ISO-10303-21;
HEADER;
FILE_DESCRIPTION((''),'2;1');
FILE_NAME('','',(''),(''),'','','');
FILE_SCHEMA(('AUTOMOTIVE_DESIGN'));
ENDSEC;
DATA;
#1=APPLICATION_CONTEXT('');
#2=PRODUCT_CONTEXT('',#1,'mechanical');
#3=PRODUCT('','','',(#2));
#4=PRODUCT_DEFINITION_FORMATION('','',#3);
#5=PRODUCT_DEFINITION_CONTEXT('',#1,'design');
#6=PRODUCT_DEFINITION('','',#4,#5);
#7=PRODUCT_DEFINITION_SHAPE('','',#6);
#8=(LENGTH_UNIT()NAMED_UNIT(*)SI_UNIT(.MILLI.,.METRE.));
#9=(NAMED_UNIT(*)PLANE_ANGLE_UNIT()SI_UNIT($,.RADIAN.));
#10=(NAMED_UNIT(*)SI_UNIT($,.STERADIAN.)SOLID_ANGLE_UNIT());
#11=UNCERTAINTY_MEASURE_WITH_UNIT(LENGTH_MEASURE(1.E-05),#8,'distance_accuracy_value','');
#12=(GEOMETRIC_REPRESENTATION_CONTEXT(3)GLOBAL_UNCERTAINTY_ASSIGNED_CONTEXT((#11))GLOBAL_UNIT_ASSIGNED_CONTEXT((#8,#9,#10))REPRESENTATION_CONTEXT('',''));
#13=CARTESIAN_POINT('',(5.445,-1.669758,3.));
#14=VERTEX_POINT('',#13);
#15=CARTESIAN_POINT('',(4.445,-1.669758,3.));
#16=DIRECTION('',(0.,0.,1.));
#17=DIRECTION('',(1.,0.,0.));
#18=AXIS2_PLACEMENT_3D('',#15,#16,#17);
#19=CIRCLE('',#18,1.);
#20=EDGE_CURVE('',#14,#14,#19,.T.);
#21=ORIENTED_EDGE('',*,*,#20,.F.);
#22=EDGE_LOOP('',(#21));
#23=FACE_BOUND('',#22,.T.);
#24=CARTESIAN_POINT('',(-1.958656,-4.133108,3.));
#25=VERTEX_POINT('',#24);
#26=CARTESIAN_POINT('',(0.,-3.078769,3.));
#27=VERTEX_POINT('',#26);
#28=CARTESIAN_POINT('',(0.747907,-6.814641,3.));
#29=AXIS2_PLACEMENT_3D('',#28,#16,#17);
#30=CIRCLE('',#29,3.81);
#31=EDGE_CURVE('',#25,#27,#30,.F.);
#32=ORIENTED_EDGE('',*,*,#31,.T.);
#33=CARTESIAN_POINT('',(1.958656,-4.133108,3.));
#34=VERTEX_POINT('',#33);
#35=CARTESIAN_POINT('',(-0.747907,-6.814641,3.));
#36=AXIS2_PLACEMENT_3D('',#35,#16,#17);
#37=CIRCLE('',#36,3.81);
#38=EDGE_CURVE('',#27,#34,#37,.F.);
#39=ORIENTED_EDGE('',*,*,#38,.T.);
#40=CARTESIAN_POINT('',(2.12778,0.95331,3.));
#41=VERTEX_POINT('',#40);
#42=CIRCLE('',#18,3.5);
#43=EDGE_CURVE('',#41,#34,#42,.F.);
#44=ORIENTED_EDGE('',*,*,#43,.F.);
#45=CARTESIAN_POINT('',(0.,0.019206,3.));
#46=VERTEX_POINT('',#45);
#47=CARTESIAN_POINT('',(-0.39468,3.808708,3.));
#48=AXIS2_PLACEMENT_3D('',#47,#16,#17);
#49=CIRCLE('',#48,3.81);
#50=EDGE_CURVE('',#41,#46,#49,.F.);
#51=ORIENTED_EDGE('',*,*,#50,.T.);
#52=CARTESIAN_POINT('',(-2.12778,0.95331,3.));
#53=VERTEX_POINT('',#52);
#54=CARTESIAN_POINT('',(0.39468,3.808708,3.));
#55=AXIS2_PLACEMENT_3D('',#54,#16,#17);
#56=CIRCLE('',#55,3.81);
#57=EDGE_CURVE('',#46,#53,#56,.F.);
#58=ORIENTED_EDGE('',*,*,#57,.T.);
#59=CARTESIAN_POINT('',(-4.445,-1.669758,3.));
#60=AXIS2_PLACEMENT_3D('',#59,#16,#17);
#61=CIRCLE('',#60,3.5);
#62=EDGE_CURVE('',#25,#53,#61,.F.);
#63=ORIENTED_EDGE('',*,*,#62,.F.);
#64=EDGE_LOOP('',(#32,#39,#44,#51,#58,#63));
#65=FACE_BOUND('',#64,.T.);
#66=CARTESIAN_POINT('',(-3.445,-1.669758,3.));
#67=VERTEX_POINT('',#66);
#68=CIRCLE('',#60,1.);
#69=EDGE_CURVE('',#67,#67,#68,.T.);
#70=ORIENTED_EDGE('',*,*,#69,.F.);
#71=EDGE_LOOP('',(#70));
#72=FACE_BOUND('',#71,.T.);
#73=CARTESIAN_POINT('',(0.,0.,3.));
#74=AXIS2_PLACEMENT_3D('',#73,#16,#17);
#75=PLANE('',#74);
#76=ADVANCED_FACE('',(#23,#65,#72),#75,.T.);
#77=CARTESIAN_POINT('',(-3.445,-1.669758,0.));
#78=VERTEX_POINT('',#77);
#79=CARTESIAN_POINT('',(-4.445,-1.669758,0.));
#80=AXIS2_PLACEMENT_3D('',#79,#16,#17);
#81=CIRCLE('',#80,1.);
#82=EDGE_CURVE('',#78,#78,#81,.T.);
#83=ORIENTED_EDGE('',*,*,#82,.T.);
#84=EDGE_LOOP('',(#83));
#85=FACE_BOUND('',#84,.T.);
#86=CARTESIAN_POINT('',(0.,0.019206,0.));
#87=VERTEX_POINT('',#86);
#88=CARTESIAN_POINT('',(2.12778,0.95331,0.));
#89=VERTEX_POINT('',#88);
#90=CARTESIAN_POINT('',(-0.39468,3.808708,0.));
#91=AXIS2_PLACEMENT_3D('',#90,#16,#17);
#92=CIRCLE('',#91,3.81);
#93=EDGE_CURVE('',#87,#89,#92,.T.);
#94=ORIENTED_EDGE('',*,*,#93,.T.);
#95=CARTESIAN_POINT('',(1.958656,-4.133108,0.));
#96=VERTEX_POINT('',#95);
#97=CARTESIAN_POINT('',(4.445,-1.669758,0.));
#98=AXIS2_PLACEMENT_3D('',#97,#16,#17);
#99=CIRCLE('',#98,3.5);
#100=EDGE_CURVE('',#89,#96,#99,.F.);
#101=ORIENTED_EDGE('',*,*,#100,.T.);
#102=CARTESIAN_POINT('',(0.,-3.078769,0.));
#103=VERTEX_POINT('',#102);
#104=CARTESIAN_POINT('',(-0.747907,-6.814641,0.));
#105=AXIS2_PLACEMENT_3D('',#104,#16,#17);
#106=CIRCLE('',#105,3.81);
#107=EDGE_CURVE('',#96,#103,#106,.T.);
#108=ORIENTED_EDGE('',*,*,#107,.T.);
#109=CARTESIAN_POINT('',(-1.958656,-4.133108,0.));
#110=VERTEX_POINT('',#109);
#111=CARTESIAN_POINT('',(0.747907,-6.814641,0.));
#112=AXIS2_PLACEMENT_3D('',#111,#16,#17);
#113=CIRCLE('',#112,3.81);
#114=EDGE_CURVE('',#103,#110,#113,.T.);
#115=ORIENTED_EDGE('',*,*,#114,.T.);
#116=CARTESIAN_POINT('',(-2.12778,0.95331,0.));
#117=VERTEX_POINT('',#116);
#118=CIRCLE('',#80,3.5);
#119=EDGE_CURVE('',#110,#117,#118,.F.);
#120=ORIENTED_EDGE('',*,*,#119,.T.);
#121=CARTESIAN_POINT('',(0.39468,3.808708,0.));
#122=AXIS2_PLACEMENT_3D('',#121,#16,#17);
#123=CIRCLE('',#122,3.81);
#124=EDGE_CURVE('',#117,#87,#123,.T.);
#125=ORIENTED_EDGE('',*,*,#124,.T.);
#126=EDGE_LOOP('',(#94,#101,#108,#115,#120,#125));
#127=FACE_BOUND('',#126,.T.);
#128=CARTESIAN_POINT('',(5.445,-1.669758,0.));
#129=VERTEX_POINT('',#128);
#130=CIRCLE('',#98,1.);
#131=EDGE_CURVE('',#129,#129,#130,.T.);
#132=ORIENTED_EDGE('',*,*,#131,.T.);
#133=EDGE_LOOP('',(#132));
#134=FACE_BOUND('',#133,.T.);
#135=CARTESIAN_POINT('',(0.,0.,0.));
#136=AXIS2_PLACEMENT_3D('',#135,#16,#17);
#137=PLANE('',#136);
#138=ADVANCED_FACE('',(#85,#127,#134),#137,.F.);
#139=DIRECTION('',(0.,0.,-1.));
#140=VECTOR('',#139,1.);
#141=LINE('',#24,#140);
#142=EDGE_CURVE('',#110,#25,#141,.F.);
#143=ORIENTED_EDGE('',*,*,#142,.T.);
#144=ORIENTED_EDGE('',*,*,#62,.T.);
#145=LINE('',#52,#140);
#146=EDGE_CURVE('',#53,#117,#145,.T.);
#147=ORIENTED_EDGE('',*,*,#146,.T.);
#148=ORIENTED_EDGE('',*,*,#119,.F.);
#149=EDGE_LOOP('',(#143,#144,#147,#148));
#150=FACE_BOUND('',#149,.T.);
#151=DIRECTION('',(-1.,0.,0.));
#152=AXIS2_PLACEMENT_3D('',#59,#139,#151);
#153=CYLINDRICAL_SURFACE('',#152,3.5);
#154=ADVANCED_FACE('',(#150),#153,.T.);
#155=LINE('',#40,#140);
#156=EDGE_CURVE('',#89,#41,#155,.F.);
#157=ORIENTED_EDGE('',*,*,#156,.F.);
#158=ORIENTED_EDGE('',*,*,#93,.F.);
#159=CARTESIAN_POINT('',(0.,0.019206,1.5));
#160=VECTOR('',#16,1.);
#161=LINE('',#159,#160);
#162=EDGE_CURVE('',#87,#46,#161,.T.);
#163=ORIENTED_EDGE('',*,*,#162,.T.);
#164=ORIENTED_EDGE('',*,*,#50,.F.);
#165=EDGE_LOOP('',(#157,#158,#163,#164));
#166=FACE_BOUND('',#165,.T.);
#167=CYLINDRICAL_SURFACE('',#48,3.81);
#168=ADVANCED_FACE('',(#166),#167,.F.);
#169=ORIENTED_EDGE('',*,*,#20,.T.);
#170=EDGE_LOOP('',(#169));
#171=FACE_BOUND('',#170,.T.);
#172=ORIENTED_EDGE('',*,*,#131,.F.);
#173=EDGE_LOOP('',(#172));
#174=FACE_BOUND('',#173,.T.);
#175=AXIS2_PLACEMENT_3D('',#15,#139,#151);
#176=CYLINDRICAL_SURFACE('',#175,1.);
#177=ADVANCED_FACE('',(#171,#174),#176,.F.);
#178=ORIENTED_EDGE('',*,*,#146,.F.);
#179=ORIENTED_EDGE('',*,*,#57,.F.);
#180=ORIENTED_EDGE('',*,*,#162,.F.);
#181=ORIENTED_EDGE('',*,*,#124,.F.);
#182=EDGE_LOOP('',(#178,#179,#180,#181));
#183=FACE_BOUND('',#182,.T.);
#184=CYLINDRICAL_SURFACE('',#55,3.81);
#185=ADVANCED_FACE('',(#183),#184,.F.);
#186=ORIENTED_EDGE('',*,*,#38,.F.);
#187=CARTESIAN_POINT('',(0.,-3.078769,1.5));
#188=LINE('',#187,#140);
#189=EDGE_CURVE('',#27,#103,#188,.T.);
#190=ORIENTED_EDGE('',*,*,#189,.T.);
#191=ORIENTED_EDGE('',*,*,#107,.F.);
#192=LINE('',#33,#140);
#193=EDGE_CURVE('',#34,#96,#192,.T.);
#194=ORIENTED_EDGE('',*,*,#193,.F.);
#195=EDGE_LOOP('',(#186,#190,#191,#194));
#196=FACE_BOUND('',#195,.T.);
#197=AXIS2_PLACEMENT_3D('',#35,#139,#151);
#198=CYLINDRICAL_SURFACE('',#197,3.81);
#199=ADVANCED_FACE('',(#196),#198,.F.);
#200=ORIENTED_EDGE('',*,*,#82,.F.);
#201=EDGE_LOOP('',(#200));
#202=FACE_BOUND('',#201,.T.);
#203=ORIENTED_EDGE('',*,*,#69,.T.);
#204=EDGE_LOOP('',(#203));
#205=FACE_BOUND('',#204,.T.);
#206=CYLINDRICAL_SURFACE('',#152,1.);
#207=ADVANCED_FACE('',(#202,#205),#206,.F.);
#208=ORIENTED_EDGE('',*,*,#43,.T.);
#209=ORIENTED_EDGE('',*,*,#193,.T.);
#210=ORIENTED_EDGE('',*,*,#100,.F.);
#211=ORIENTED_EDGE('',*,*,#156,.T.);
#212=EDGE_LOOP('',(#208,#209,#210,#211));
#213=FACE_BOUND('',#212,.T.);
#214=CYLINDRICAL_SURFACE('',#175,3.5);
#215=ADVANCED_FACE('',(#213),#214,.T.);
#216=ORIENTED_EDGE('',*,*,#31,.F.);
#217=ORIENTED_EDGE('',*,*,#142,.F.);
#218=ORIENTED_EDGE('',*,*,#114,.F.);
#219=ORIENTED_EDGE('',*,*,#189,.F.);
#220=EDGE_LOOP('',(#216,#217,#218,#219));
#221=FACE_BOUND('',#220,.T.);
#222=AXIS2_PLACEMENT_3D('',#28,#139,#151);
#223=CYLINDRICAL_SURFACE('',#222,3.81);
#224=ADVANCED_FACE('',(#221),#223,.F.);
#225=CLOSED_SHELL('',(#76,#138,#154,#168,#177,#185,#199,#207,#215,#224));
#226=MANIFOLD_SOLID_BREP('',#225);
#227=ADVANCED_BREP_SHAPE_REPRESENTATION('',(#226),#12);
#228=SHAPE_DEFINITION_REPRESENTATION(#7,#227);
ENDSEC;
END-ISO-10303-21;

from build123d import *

# Parameters (mm, degrees)
SKETCH_1_R      = 1
EXTRUDE_1_DEPTH = 3
FILLET_1_R      = 3.81


with BuildPart() as part:
    # 스케치1 → 보스-돌출1 (new body)
    with BuildSketch(Plane.XY):
        with BuildLine():
            ThreePointArc((1.360143251, -0.016380398), (7.940783027, -1.841517038), (1.212921566, -3.01276585))
            ThreePointArc((1.212921566, -3.01276585), (0, -2.999009296), (-1.212921566, -3.01276585))
            ThreePointArc((-1.212921566, -3.01276585), (-7.940783027, -1.841517038), (-1.360143251, -0.016380398))
            ThreePointArc((-1.360143251, -0.016380398), (0, 0), (1.360143251, -0.016380398))
        make_face()
        with Locations((-4.445, -1.669758406)):
            Circle(SKETCH_1_R, mode=Mode.SUBTRACT)
        with Locations((4.445, -1.669758406)):
            Circle(SKETCH_1_R, mode=Mode.SUBTRACT)
    extrude(amount=EXTRUDE_1_DEPTH)

    # 필렛1
    # the kernel refuses this fillet: 3.81 mm, written as the material it adds along each edge
    with BuildSketch(Plane(origin=(1.212921566, -3.01276585, 0), x_dir=(0.5541029817307234, -0.8324481278957396, 0), z_dir=(0, 0, 1))) as fillet_1_piece_1:
        with BuildLine():
            CenterArc((2.078362303, -3.73891854), FILLET_1_R, 101.084875911, 46.128957788)
            ThreePointArc((-1.12469468, -1.675783557), (-0.570253257, -0.832585758), (0, 0))
            ThreePointArc((0, 0), (0.672920265, -0.065297929), (1.345840529, 0))
        make_face()
    extrude(amount=3)
    with BuildSketch(Plane(origin=(-1.212921566, -3.01276585, 0), x_dir=(-0.5541029817307197, -0.8324481278957422, 0), z_dir=(0, 0, 1))) as fillet_1_piece_2:
        with BuildLine():
            CenterArc((2.078362303, 3.73891854), FILLET_1_R, 212.786166302, 46.128957788)
            ThreePointArc((-1.12469468, 1.675783557), (-0.570253257, 0.832585758), (0, 0))
            ThreePointArc((0, 0), (0.672920265, 0.065297929), (1.345840529, 0))
        make_face()
    extrude(amount=3)
    with BuildSketch(Plane(origin=(1.360143251, -0.016380398, 0), x_dir=(-0.9999615504987989, 0.008769123333507087, 0), z_dir=(0, 0, 1))) as fillet_1_piece_3:
        with BuildLine():
            CenterArc((1.788298707, -3.809553141), FILLET_1_R, 90.877535516, 41.082301134)
            ThreePointArc((-0.759103528, -0.976384975), (-0.336083058, -0.521987813), (0, 0))
            ThreePointArc((0, 0), (0.864973735, -0.006624048), (1.72994747, 0))
        make_face()
    extrude(amount=3)
    with BuildSketch(Plane(origin=(-1.360143251, -0.016380398, 0), x_dir=(-0.6206853131175095, 0.7840597822106544, 0), z_dir=(0, 0, 1))) as fillet_1_piece_4:
        with BuildLine():
            CenterArc((1.909904861, -3.750062775), FILLET_1_R, 100.176406591, 41.082301134)
            ThreePointArc((-1.061817419, -1.365745957), (-0.525679205, -0.686938726), (0, 0))
            ThreePointArc((0, 0), (0.618378077, -0.055060443), (1.236756154, 0))
        make_face()
    extrude(amount=3)


solid = part.part
